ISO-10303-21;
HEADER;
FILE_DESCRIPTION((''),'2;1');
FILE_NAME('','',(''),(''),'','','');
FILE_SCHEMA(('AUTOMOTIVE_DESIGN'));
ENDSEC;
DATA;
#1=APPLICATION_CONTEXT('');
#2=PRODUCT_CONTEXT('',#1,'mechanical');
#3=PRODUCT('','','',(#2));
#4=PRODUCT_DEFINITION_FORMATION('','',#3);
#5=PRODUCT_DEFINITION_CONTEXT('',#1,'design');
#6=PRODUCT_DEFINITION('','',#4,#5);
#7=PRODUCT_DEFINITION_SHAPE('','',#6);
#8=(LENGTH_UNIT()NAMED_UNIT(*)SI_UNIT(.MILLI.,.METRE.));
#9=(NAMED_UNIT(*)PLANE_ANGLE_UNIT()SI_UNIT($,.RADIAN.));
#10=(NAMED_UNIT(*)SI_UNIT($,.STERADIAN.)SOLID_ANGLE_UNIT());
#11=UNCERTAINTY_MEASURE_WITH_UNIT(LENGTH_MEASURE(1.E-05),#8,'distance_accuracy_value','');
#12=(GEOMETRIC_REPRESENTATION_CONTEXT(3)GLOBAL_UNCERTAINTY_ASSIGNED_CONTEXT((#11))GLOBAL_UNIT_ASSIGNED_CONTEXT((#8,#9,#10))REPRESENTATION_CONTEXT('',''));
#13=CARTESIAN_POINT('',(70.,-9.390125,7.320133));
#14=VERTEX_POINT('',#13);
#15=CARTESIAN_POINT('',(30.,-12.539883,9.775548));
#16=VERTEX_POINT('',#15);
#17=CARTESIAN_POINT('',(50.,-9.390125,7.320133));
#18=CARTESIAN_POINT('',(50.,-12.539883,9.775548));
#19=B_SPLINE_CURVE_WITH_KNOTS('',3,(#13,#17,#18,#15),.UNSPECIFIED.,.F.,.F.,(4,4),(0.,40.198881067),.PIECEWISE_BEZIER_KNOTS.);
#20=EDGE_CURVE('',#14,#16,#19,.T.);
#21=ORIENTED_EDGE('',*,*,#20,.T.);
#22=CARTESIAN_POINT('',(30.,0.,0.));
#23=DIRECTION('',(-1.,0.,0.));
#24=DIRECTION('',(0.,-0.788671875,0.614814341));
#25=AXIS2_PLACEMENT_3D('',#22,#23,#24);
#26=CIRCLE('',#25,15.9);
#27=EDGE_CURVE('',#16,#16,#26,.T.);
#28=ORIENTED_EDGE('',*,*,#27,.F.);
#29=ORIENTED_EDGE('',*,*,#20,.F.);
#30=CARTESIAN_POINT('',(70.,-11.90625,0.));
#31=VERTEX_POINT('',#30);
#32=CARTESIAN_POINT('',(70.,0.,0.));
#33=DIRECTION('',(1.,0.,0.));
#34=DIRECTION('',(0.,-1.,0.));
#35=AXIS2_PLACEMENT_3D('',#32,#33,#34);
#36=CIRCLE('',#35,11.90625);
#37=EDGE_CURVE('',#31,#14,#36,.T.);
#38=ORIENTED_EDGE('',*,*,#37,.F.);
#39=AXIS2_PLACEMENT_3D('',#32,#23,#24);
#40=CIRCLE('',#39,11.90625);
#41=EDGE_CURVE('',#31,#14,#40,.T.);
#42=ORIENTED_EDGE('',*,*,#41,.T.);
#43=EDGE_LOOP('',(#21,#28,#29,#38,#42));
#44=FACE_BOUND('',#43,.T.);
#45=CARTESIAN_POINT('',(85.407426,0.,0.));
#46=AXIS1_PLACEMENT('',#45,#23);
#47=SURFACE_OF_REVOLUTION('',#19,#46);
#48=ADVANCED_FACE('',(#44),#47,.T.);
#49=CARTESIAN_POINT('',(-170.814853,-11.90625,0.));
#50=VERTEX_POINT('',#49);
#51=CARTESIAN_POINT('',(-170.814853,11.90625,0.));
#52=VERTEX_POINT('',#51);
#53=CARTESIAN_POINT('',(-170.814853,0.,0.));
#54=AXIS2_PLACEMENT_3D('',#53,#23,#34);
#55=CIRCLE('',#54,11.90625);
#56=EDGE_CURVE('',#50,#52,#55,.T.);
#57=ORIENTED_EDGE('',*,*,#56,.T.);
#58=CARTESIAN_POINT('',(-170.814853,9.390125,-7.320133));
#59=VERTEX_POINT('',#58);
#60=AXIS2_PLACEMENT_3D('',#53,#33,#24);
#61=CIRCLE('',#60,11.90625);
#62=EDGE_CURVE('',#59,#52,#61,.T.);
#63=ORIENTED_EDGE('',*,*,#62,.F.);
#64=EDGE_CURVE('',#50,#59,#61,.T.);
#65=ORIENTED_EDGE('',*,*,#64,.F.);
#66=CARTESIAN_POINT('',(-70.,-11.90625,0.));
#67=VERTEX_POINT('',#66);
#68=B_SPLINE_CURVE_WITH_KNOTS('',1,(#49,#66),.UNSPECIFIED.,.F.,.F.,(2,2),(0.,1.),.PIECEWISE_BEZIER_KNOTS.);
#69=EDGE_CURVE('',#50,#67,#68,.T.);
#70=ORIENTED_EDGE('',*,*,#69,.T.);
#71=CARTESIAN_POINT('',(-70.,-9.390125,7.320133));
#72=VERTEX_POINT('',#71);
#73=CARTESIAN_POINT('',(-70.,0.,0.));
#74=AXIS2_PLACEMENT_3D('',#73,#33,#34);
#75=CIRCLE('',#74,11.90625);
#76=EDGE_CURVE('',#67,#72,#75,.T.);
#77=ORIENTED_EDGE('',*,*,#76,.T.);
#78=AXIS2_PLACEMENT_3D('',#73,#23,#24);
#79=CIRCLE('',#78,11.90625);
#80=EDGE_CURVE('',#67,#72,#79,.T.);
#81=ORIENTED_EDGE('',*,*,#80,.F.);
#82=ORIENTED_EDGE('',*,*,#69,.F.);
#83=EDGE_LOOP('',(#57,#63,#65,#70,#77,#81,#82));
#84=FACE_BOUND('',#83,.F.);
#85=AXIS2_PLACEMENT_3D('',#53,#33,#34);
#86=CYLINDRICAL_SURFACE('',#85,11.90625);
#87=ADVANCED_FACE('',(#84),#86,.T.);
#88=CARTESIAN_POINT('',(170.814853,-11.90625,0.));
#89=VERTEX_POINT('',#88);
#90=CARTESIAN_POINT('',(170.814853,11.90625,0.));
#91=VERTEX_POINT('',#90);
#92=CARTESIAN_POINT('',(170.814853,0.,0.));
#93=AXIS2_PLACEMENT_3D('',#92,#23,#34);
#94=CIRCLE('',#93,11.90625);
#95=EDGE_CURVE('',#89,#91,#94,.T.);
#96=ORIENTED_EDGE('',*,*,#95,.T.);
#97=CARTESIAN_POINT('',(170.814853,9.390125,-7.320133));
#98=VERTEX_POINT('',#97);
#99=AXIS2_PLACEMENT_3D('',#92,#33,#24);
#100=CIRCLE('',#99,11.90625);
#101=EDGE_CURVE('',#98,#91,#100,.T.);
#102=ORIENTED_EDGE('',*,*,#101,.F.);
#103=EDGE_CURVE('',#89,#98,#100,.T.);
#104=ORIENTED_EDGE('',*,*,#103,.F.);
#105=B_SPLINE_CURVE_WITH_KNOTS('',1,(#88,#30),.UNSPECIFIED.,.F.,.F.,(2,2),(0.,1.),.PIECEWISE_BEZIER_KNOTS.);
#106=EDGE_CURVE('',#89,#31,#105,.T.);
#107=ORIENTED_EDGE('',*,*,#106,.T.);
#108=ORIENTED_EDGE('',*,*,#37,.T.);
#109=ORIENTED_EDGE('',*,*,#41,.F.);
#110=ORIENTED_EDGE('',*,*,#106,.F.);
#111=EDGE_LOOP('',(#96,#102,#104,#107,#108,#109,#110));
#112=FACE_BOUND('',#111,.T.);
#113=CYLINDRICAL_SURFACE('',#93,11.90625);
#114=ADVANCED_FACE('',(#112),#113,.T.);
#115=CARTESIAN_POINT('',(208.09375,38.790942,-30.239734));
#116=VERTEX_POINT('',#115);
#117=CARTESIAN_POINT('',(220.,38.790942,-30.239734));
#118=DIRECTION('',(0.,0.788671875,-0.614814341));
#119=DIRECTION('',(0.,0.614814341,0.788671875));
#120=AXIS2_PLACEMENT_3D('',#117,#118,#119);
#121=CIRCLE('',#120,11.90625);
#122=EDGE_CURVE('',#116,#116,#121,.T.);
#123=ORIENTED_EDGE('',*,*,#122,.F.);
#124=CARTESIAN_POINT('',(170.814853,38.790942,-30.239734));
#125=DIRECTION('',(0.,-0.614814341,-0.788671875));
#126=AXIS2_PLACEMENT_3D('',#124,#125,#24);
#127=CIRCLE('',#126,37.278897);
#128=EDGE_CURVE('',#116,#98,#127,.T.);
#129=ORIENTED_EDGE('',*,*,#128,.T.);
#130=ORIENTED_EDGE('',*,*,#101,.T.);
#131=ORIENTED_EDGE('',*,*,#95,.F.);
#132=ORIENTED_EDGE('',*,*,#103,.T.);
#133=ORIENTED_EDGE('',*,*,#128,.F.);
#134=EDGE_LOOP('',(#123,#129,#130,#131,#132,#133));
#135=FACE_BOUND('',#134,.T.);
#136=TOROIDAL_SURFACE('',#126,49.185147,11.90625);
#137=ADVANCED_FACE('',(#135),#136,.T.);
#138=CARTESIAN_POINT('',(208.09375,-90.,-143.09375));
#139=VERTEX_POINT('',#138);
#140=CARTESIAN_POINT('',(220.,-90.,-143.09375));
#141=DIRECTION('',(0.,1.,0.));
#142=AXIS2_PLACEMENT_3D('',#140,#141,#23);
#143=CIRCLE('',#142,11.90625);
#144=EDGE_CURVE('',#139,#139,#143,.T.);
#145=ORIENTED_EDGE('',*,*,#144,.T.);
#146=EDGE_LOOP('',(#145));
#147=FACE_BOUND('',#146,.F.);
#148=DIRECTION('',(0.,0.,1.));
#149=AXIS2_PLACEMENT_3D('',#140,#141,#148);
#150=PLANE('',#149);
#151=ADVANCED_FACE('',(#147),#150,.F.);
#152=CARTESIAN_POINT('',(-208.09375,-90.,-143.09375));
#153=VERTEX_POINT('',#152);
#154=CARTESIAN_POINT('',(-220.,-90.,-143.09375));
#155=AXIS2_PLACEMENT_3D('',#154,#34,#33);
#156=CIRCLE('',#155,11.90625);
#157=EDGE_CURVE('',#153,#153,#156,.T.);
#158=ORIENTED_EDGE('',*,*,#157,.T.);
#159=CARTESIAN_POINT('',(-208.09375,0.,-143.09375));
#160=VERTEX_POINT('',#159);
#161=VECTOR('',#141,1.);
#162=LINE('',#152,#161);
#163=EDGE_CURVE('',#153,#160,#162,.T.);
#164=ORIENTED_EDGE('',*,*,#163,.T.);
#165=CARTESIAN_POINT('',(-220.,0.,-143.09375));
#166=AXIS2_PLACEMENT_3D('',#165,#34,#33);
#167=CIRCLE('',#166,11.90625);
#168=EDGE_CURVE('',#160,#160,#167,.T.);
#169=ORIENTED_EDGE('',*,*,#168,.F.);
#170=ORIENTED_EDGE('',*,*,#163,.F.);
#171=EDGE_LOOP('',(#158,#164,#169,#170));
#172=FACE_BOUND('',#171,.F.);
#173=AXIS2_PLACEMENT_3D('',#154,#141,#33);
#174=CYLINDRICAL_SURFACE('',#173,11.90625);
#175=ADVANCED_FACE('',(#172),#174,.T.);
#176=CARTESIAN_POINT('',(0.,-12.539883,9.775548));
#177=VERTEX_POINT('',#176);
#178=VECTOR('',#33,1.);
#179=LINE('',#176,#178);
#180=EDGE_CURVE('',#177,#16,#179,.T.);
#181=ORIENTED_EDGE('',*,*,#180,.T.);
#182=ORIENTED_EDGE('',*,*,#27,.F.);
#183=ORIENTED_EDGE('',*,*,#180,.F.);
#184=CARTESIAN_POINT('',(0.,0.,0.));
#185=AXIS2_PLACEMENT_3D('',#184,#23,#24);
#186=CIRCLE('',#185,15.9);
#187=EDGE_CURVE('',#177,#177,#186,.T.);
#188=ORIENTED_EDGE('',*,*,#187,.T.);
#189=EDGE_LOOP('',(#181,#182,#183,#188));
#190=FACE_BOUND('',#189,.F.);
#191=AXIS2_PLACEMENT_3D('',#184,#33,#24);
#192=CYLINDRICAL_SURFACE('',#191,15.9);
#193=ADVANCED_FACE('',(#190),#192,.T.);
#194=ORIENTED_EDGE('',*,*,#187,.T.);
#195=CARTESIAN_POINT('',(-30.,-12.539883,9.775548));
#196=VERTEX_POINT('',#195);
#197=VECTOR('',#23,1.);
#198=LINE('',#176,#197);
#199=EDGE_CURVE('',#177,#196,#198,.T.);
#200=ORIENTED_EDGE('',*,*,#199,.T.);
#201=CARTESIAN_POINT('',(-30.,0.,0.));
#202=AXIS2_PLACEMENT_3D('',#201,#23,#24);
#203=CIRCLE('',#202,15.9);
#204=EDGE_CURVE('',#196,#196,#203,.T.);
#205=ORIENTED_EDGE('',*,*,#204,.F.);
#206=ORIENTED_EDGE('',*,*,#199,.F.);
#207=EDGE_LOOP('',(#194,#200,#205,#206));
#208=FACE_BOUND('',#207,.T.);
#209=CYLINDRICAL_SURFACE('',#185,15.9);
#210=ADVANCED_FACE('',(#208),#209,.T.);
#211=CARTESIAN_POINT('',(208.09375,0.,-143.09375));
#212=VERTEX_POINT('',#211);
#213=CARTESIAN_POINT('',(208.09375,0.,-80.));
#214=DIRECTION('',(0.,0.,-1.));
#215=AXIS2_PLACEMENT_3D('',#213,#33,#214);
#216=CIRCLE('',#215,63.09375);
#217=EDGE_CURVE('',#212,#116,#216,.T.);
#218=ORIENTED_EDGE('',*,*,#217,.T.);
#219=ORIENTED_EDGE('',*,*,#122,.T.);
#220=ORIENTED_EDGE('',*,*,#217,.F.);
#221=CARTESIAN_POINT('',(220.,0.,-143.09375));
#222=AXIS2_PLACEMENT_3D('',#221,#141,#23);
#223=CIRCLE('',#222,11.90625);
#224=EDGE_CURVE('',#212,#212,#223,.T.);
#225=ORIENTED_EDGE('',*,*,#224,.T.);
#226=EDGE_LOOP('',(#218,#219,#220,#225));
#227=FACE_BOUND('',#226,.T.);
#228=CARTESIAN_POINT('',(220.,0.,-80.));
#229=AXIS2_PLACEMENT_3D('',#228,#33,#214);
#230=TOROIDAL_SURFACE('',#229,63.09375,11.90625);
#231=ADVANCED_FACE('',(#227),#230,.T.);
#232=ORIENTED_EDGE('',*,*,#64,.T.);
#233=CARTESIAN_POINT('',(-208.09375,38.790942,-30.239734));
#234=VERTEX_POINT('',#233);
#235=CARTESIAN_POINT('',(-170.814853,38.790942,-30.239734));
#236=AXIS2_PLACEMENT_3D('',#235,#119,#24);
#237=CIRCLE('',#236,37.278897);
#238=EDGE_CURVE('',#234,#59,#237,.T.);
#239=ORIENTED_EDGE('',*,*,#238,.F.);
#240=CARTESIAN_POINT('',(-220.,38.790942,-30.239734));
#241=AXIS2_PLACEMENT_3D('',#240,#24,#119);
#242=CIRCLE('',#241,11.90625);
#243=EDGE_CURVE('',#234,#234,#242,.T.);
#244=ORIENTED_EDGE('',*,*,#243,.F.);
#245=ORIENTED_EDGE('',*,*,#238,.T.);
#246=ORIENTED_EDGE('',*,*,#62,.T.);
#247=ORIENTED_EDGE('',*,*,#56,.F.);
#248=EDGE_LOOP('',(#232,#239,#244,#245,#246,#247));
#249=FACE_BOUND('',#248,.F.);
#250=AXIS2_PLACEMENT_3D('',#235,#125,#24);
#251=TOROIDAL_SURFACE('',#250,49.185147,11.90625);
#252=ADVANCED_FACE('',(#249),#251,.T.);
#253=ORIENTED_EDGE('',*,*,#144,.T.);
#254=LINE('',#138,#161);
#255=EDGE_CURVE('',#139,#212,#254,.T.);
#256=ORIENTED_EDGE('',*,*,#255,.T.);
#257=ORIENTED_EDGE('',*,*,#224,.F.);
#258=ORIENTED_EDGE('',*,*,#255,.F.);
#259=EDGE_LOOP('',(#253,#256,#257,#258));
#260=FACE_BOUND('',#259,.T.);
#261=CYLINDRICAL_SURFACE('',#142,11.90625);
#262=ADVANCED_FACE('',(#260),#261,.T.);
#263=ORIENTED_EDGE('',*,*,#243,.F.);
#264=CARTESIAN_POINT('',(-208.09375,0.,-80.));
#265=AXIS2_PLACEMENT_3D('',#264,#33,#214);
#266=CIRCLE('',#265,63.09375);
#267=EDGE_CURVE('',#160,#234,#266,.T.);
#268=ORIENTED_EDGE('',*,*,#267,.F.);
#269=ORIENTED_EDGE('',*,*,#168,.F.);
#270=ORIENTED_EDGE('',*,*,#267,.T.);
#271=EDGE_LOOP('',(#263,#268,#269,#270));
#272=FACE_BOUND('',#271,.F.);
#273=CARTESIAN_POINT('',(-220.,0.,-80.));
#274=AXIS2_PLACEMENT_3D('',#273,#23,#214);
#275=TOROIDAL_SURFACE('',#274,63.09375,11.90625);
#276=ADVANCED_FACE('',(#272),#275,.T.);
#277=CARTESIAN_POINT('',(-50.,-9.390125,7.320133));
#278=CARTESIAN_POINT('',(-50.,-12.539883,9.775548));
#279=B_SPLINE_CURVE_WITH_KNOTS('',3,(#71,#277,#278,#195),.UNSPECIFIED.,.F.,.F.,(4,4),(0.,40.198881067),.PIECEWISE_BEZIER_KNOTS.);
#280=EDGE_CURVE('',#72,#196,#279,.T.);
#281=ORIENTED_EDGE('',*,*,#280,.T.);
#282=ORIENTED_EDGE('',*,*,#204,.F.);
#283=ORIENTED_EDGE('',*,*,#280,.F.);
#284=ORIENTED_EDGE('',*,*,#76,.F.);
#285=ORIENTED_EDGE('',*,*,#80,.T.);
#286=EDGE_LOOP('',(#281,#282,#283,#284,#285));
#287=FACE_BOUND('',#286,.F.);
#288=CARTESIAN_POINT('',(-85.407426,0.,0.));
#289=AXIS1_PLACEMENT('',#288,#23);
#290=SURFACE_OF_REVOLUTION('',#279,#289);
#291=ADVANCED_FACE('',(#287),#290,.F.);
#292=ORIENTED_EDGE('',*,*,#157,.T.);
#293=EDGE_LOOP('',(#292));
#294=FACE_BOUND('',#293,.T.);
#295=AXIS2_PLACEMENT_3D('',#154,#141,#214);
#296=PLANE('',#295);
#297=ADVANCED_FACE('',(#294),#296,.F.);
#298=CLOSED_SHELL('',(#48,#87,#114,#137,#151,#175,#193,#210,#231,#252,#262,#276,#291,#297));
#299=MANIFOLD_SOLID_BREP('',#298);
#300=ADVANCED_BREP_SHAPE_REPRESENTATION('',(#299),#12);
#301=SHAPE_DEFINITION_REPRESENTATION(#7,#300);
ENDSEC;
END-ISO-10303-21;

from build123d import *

# Parameters (mm, degrees)
F4_R       = 11.90625
F11_FACE_R = 11.90625
F13_FACE_R = 11.90625


with BuildPart() as f11:
    # F11: sweep along a path in F8, F10
    with BuildLine(Plane(origin=(220, 0, 0), x_dir=(0, -1, 0), z_dir=(-1, 0, 0))) as f11_path:
        Line((90, -143.09375), (0, -143.09375))
        ThreePointArc((0, -143.09375), (-59.6673406444, -100.5092600912), (-38.7909423113, -30.2397338867))
    with BuildLine(Plane(origin=(0, 0, 0), x_dir=(1, 0, 0), z_dir=(0, 0.6148143407, 0.788671875))) as f11_path_2:
        ThreePointArc((170.8148527405, 0), (205.5940039014, 14.4059960986), (220, 49.1851472595))
    # F4 (on line) → F11 (sweep)
    with BuildSketch(Plane(origin=(0, -90, 0), x_dir=(-1, 0, 0), z_dir=(0, 1, 0))):
        with Locations((-220, -143.09375)):
            Circle(F4_R)
    sweep(path=f11_path.line + f11_path_2.line)



with BuildPart() as f13:
    # F12 (on 3pt) → F13 (revolve)
    with BuildSketch(Plane(origin=(0, 0, 0), x_dir=(1, 0, 0), z_dir=(0, 0.6148143407, 0.788671875))):
        with BuildLine():
            Line((0, 0), (0, -15.9))
            Line((0, -15.9), (30, -15.9))
            add(Edge.make_bspline(
                [(70, -11.90625), (50, -11.90625), (50, -15.9), (30, -15.9)],
                knots=[0, 0, 0, 0, 40.1988810673, 40.1988810673, 40.1988810673, 40.1988810673], degree=3))
            Line((70, -11.90625), (70, 0))
            Line((70, 0), (0, 0))
        make_face()
    revolve(axis=Axis((85.4074263703, 0, 0), (-1, 0, 0)))


with BuildPart() as f11_1:
    add(f11.part)

    add(f13.part)  # F14 merges F13
    # F11_face (on face) → F14 section 0
    with BuildSketch(Plane(origin=(170.8148527405, 0, 0), x_dir=(0, -1, 0), z_dir=(-1, 0, 0))):
        Circle(F11_FACE_R)
    # F13_face (on face) → F14 section 1
    with BuildSketch(Plane.YZ.offset(70)):
        Circle(F13_FACE_R)
    loft()

    # F15: F11 across plane


with BuildPart() as f11_2:
    add(f11_1.part)
    add(f11_1.part.mirror(Plane.YZ))


solid = f11_2.part
